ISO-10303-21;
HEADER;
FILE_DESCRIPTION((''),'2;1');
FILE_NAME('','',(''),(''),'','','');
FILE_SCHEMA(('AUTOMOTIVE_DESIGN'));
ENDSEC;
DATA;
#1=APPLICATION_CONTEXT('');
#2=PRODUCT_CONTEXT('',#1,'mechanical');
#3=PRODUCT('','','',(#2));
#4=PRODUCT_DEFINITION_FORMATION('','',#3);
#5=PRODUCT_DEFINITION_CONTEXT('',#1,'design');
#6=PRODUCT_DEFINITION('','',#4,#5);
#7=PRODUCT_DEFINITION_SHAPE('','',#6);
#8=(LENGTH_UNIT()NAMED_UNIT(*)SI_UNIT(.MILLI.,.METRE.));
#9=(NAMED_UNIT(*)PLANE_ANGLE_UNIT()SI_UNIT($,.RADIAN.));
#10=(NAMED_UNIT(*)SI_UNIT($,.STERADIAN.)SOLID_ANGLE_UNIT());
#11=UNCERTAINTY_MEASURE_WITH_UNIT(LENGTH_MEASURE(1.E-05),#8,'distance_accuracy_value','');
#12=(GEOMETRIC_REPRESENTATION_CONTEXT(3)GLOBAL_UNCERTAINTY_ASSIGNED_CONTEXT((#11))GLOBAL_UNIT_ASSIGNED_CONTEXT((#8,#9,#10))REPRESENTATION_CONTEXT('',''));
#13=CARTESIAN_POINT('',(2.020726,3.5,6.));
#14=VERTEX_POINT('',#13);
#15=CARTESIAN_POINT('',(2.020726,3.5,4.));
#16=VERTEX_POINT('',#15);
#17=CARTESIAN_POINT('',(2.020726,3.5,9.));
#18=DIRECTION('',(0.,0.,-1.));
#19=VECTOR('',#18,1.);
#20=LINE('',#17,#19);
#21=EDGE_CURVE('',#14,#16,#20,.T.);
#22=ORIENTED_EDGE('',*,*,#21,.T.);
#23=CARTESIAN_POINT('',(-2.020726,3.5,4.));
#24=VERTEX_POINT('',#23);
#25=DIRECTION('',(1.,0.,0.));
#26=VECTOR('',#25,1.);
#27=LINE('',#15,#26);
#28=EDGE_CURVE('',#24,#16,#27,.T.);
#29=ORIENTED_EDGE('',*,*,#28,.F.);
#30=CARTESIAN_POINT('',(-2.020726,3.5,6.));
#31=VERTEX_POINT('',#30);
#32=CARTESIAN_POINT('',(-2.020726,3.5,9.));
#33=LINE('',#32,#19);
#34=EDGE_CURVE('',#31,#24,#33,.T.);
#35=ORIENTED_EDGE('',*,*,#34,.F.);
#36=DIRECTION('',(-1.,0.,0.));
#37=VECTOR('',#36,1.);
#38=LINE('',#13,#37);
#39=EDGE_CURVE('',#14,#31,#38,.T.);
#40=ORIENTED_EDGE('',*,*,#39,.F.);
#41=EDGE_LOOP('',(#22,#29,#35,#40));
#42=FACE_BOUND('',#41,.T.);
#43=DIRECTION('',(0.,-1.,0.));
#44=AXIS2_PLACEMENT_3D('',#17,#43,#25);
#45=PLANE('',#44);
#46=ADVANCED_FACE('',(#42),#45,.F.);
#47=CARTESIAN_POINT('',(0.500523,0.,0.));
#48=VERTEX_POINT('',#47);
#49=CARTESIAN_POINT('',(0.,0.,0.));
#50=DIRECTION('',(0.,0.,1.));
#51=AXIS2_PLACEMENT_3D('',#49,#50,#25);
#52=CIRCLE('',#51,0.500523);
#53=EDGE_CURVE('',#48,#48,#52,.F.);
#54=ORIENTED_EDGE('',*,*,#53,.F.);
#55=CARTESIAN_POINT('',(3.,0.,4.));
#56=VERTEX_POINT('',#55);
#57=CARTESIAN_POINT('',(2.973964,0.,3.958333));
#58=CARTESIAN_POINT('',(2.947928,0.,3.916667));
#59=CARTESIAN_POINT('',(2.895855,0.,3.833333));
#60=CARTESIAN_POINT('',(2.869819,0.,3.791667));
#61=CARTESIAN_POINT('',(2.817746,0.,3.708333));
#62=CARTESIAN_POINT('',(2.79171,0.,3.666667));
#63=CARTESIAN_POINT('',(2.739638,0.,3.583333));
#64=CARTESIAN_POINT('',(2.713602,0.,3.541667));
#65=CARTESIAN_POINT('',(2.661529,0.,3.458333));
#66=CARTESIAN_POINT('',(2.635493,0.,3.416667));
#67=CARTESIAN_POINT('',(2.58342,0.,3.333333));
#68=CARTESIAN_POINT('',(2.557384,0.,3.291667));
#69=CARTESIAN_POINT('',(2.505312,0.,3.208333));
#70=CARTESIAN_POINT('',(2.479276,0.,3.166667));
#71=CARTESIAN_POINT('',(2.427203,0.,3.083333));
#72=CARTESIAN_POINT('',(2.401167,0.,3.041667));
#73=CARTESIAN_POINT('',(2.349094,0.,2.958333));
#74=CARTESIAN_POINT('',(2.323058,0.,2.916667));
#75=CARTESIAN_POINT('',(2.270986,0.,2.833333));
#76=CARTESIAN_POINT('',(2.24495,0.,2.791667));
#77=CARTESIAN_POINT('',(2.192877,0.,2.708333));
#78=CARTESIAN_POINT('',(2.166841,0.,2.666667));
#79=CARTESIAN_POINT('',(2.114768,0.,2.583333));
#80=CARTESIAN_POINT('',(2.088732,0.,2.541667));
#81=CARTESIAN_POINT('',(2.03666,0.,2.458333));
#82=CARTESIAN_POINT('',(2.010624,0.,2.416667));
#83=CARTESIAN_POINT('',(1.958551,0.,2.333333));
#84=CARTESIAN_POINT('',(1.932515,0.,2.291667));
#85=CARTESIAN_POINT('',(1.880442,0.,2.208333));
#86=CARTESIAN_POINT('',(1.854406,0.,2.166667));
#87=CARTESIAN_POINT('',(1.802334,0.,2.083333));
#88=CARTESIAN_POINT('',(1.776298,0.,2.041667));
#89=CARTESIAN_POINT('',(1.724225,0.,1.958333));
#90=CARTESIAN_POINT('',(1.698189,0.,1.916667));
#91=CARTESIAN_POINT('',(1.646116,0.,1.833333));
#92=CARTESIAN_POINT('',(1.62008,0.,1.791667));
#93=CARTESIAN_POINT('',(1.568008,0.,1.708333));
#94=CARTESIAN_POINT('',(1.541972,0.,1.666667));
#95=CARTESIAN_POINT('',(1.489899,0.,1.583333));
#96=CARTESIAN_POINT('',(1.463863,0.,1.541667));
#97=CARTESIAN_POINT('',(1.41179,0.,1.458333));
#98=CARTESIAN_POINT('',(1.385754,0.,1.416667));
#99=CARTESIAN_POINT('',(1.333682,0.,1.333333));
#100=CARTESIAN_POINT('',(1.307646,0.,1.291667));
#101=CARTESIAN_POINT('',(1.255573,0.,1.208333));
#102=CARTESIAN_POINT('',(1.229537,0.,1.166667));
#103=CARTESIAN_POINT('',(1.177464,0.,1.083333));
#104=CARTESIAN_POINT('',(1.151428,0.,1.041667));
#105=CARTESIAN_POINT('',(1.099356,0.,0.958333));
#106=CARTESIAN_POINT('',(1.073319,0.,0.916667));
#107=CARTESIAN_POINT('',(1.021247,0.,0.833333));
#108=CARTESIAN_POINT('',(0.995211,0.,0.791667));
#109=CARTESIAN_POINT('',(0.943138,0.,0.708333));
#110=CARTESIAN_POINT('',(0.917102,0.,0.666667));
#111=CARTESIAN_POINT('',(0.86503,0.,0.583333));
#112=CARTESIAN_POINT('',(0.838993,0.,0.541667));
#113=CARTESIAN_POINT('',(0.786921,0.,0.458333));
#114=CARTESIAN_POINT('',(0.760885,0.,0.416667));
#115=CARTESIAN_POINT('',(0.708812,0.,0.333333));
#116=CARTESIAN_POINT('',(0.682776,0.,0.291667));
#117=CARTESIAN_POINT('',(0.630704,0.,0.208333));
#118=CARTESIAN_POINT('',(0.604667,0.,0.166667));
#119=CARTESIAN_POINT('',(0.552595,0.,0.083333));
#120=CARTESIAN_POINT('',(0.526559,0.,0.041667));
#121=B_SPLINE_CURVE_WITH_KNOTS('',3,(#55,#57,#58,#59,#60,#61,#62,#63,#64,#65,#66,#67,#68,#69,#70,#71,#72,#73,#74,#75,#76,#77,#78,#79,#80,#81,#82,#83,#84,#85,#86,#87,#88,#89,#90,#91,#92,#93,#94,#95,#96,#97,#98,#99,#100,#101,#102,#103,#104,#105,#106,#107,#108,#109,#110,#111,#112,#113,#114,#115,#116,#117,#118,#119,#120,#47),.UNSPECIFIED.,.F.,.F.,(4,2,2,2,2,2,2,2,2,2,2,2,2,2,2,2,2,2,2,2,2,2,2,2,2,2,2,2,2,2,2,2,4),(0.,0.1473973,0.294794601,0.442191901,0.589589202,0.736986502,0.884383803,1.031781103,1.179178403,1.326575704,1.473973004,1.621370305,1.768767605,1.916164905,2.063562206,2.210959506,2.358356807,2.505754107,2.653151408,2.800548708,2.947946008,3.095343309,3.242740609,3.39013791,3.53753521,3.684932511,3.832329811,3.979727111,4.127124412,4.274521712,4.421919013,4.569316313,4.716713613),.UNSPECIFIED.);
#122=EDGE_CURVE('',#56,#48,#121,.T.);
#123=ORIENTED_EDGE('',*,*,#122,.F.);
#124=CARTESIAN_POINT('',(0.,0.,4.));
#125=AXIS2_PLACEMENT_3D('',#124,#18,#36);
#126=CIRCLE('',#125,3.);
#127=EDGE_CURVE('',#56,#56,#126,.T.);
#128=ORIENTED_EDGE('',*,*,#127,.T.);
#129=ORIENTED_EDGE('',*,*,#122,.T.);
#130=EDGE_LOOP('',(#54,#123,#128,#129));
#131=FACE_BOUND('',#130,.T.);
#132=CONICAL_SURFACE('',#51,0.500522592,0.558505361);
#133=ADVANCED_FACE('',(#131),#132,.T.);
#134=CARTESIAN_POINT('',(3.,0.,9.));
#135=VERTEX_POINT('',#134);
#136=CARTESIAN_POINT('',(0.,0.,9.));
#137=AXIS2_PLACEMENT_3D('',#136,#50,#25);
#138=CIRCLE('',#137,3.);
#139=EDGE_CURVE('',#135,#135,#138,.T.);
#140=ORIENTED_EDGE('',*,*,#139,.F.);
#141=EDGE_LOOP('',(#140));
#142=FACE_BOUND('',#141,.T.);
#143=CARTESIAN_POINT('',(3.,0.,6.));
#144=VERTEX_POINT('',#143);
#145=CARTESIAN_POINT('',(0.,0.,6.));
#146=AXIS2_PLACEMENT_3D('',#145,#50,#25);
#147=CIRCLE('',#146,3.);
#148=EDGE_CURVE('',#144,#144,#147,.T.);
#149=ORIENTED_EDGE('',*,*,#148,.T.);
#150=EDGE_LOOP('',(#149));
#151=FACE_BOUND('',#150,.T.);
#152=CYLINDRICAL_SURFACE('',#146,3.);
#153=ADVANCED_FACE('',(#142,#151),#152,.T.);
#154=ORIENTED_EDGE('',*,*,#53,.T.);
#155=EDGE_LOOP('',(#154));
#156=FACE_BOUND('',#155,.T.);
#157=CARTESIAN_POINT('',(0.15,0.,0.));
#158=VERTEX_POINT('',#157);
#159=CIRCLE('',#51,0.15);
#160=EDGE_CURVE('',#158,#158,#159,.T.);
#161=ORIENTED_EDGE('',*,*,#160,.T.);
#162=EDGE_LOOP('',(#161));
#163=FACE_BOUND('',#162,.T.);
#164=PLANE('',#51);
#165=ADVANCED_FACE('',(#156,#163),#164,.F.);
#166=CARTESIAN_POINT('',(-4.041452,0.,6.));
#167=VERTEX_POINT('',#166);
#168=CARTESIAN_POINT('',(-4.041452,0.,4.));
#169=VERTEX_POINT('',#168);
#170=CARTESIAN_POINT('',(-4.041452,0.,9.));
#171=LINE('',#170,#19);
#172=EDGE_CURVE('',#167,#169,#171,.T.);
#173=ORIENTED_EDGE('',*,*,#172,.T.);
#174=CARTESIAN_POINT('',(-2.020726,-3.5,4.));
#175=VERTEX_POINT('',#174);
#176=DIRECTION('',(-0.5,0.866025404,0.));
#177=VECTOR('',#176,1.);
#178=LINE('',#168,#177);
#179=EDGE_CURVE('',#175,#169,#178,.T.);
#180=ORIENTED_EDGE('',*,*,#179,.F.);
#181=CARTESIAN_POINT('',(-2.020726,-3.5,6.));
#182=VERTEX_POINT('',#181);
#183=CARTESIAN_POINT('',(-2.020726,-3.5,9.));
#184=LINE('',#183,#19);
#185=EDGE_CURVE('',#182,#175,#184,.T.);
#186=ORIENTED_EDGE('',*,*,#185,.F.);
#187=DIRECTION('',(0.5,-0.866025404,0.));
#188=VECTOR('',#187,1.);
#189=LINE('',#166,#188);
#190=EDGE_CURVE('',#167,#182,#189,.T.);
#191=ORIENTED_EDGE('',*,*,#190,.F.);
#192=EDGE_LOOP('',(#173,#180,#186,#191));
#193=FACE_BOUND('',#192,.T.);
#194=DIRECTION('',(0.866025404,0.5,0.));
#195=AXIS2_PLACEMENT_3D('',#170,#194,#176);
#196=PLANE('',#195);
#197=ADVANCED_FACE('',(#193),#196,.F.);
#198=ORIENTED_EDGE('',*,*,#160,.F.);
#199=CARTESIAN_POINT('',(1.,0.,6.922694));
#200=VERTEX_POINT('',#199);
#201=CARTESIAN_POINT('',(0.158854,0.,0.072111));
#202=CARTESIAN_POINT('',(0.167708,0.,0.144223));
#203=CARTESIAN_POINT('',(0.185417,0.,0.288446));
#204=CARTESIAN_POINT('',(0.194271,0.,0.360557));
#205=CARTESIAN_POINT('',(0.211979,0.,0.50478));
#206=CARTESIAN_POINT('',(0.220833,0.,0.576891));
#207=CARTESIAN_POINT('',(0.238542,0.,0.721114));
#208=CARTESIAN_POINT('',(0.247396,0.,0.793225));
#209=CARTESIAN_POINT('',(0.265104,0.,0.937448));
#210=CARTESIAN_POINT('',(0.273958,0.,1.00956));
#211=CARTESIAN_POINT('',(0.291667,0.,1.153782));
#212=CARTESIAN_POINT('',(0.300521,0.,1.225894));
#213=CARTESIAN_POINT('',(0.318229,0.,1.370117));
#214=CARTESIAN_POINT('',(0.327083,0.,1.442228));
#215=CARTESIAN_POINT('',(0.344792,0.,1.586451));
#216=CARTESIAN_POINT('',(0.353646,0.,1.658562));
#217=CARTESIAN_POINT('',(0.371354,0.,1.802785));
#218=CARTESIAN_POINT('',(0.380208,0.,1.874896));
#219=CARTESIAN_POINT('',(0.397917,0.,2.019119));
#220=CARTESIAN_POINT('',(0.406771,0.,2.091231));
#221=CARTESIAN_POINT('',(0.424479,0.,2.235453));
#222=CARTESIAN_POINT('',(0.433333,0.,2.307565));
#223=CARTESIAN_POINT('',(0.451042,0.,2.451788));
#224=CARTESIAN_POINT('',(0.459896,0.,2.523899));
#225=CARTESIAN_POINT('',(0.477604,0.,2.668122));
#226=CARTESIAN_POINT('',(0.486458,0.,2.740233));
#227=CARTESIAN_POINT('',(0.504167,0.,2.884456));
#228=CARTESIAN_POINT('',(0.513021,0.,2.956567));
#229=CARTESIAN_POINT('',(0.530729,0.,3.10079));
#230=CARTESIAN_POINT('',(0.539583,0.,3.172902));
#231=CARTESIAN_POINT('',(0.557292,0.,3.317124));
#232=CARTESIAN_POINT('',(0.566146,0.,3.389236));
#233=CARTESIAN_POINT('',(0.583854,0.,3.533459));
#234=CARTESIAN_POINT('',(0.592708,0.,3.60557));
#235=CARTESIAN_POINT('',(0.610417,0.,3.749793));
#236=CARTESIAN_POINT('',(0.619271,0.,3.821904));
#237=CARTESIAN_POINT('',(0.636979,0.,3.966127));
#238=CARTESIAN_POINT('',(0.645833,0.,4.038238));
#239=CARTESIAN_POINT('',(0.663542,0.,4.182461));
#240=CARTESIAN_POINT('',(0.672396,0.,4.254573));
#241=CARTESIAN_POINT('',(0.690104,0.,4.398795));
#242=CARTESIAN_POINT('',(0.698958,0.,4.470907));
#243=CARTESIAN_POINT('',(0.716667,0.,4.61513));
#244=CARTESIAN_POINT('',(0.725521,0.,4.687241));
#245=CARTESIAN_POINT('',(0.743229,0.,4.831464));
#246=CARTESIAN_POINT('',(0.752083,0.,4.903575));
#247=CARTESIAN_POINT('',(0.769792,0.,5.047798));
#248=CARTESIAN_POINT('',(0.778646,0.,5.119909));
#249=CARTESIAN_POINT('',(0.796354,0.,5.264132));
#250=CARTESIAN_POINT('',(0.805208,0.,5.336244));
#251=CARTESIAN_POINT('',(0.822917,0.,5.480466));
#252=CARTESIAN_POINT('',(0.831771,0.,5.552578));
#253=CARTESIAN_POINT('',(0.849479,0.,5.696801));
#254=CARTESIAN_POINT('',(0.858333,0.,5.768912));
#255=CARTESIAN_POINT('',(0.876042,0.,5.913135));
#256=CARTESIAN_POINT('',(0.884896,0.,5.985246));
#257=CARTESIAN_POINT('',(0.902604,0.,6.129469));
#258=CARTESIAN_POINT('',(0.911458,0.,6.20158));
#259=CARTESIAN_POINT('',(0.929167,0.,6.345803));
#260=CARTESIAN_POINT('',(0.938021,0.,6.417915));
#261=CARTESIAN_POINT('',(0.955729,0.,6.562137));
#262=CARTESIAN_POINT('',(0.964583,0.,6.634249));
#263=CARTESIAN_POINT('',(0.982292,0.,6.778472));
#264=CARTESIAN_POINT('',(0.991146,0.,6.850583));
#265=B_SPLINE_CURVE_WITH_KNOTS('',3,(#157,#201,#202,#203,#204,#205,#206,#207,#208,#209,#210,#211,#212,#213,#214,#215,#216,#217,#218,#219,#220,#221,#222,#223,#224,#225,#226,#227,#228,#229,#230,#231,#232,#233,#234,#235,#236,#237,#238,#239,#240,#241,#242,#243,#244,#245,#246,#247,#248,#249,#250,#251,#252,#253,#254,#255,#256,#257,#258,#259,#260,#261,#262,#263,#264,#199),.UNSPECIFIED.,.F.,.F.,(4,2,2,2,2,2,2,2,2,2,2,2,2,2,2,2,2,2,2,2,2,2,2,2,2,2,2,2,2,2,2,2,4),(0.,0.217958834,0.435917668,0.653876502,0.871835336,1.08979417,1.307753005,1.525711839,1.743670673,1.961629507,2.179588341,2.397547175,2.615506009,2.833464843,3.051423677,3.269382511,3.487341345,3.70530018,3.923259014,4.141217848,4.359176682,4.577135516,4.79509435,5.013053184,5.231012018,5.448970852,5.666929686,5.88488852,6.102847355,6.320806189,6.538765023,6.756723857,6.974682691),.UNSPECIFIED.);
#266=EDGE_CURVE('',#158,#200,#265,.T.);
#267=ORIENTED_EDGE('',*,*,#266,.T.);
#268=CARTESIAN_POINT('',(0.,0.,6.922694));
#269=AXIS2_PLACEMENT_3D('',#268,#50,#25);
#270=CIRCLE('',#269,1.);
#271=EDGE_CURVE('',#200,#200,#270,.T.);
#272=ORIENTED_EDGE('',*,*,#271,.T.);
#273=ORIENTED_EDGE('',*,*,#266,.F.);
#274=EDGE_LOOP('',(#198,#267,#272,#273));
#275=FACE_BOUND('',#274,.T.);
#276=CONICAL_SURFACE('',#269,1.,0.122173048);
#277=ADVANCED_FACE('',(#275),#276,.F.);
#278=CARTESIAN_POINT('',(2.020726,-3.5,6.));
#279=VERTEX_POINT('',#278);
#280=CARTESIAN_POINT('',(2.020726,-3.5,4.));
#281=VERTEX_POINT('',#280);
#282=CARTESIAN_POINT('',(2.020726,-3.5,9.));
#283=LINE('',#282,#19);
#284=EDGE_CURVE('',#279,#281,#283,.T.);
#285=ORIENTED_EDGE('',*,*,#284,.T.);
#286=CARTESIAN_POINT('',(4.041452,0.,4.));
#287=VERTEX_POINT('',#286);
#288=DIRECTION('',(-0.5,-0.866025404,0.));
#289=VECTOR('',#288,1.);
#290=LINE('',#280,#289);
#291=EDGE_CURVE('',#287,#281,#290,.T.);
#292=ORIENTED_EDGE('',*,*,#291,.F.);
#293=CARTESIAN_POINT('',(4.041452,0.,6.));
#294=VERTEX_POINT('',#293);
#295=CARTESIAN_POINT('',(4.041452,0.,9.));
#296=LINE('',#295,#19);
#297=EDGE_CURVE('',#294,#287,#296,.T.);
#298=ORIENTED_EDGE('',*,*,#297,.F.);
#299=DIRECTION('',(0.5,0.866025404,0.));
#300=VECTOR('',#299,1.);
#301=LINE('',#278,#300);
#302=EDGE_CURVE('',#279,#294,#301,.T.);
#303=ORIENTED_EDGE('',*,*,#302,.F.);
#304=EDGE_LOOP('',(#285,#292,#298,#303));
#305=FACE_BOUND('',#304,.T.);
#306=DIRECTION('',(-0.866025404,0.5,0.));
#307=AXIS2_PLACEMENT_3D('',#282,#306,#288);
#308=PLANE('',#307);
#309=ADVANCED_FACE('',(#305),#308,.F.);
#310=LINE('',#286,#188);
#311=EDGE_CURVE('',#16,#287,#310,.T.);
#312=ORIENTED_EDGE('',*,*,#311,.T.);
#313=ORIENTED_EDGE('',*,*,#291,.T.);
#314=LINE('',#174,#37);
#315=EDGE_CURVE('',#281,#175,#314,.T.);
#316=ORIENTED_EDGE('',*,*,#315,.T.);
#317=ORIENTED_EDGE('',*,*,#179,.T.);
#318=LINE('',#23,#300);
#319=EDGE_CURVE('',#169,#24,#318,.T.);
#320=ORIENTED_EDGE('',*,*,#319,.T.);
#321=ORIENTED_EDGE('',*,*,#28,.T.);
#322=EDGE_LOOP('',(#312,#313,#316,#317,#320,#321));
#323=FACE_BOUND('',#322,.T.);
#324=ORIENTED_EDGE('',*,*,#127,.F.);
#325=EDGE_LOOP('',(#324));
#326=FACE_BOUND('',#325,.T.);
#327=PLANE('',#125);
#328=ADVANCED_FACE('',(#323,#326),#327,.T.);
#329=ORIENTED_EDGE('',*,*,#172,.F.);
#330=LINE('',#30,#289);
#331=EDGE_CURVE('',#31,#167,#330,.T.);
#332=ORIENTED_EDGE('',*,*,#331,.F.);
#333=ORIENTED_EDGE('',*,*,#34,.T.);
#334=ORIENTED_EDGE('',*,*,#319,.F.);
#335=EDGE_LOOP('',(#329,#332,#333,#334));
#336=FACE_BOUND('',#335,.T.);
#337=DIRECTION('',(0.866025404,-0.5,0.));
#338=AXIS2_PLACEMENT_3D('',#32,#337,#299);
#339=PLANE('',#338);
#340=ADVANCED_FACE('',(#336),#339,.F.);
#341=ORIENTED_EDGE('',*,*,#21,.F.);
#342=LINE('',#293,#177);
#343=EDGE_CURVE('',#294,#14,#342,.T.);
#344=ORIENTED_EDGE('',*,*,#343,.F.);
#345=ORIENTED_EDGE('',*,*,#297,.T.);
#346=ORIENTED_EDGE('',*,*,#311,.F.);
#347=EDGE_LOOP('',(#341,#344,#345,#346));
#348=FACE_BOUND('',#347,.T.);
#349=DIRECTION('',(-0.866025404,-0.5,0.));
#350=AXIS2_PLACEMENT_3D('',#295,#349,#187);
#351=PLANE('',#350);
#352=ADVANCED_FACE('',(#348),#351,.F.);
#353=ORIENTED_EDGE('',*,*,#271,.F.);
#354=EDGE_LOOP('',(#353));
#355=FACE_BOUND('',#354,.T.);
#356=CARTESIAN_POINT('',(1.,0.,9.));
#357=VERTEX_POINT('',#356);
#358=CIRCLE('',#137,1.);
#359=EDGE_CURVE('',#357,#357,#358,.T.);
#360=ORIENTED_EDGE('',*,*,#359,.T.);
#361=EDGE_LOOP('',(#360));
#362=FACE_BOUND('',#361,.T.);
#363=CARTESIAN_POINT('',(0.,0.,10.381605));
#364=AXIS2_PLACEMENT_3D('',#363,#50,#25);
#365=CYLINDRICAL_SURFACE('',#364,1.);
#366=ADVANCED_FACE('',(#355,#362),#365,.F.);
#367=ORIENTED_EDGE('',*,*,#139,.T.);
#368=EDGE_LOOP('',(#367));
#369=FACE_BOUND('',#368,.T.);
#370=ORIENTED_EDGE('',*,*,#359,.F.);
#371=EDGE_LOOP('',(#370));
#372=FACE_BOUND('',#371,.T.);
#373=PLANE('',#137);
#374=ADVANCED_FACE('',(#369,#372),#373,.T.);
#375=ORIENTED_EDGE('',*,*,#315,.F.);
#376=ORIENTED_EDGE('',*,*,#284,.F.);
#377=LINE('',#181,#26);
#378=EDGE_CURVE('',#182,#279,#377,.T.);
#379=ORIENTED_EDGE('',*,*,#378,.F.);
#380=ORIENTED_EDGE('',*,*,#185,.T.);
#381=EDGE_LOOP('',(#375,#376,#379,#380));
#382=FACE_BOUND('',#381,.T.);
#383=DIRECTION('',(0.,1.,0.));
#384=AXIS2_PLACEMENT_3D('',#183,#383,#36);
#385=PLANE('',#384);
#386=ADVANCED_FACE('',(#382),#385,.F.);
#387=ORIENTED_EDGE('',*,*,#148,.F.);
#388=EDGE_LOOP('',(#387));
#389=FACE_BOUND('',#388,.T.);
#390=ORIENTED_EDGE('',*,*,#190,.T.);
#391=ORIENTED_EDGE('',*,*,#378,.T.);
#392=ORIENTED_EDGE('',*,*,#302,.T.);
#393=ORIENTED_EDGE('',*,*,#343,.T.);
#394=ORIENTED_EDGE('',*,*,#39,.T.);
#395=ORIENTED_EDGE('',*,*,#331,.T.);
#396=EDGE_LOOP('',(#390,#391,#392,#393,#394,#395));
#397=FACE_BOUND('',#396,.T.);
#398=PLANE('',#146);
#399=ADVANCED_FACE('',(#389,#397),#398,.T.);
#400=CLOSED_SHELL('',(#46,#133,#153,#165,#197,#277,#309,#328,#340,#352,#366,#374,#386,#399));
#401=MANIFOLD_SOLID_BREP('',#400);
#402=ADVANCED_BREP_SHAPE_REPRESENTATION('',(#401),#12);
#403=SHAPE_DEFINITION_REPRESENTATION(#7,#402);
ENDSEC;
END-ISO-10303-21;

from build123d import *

# Parameters (mm, degrees)
BOSS_EXTRU_1_DEPTH      = 9
ESQUISSE2_W             = 19.623971562
ESQUISSE2_H             = 15.534154535
ESQUISSE2_R             = 3
ENL_V_MAT_EXTRU_1_DEPTH = 3
ENL_V_START             = -4
ESQUISSE3_W             = 11.267201257
ESQUISSE3_H             = 13.961169169
ESQUISSE3_R             = 3
ENL_V_MAT_EXTRU_2_DEPTH = 4
CHANFREIN1_SIZE         = 4
CHANFREIN1_SIZE_2       = 2.499477408


with BuildPart() as part:
    # Esquisse1 → Boss.-Extru.1 (new body)
    with BuildSketch(Plane.XY):
        Polygon((4.041451884, 0), (2.020725942, 3.5), (-2.020725942, 3.5), (-4.041451884, 0), (-2.020725942, -3.5), (2.020725942, -3.5), align=None)
    extrude(amount=BOSS_EXTRU_1_DEPTH)

    # Esquisse2 → Enlèv. mat.-Extru.1 (cut)
    with BuildSketch(Plane.XY.offset(9)):
        with Locations((0.327116653, -1.544441398)):
            Rectangle(ESQUISSE2_W, ESQUISSE2_H)
        Circle(ESQUISSE2_R, mode=Mode.SUBTRACT)
    extrude(amount=-ENL_V_MAT_EXTRU_1_DEPTH, mode=Mode.SUBTRACT)

    # Esquisse3 → Enlèv. mat.-Extru.2 (cut)
    with BuildSketch(Plane(origin=(0, 0, 0), x_dir=(-1, 0, 0), z_dir=(0, 0, -1)).offset(ENL_V_START)):
        with Locations((0.009770186, 0.039262349)):
            Rectangle(ESQUISSE3_W, ESQUISSE3_H)
        with Locations(Location((0, 0, 0), (0, 0, 180))):
            Circle(ESQUISSE3_R, mode=Mode.SUBTRACT)
    extrude(amount=ENL_V_MAT_EXTRU_2_DEPTH, mode=Mode.SUBTRACT)

    # Chanfrein1
    # the kernel refuses this chamfer: 4, 2.499477408 mm, written as the material it takes off along each edge
    with BuildSketch(Plane(origin=(0, 0, 0), x_dir=(1, 0, 0), z_dir=(0, 1, 0))) as chanfrein1_piece_1_section:
        Polygon((3, -CHANFREIN1_SIZE), (3 - CHANFREIN1_SIZE_2, 0), (3, 0), align=None)
    chanfrein1_piece_1 = revolve(axis=Axis((0, 0, 0), (0, 0, -1)), mode=Mode.PRIVATE)
    chanfrein1_piece_1 = split(chanfrein1_piece_1, bisect_by=Plane(origin=(-1.744026904, 0, 4), z_dir=(0, 0, -1)), keep=Keep.TOP, mode=Mode.PRIVATE)
    add(chanfrein1_piece_1, mode=Mode.SUBTRACT)

    # Esquisse4 → Enlèvement de matière-Révolution1 (revolve, cut)
    with BuildSketch(Plane(origin=(0, 0, 0), x_dir=(1, 0, 0), z_dir=(0, 1, 0))):
        Polygon((0, -9), (1, -9), (1, -6.922694464), (0.15, 0), (0, 0), align=None)
    revolve(axis=Axis((0, 0, 10.381605157), (0, 0, -1)), mode=Mode.SUBTRACT)


solid = part.part
